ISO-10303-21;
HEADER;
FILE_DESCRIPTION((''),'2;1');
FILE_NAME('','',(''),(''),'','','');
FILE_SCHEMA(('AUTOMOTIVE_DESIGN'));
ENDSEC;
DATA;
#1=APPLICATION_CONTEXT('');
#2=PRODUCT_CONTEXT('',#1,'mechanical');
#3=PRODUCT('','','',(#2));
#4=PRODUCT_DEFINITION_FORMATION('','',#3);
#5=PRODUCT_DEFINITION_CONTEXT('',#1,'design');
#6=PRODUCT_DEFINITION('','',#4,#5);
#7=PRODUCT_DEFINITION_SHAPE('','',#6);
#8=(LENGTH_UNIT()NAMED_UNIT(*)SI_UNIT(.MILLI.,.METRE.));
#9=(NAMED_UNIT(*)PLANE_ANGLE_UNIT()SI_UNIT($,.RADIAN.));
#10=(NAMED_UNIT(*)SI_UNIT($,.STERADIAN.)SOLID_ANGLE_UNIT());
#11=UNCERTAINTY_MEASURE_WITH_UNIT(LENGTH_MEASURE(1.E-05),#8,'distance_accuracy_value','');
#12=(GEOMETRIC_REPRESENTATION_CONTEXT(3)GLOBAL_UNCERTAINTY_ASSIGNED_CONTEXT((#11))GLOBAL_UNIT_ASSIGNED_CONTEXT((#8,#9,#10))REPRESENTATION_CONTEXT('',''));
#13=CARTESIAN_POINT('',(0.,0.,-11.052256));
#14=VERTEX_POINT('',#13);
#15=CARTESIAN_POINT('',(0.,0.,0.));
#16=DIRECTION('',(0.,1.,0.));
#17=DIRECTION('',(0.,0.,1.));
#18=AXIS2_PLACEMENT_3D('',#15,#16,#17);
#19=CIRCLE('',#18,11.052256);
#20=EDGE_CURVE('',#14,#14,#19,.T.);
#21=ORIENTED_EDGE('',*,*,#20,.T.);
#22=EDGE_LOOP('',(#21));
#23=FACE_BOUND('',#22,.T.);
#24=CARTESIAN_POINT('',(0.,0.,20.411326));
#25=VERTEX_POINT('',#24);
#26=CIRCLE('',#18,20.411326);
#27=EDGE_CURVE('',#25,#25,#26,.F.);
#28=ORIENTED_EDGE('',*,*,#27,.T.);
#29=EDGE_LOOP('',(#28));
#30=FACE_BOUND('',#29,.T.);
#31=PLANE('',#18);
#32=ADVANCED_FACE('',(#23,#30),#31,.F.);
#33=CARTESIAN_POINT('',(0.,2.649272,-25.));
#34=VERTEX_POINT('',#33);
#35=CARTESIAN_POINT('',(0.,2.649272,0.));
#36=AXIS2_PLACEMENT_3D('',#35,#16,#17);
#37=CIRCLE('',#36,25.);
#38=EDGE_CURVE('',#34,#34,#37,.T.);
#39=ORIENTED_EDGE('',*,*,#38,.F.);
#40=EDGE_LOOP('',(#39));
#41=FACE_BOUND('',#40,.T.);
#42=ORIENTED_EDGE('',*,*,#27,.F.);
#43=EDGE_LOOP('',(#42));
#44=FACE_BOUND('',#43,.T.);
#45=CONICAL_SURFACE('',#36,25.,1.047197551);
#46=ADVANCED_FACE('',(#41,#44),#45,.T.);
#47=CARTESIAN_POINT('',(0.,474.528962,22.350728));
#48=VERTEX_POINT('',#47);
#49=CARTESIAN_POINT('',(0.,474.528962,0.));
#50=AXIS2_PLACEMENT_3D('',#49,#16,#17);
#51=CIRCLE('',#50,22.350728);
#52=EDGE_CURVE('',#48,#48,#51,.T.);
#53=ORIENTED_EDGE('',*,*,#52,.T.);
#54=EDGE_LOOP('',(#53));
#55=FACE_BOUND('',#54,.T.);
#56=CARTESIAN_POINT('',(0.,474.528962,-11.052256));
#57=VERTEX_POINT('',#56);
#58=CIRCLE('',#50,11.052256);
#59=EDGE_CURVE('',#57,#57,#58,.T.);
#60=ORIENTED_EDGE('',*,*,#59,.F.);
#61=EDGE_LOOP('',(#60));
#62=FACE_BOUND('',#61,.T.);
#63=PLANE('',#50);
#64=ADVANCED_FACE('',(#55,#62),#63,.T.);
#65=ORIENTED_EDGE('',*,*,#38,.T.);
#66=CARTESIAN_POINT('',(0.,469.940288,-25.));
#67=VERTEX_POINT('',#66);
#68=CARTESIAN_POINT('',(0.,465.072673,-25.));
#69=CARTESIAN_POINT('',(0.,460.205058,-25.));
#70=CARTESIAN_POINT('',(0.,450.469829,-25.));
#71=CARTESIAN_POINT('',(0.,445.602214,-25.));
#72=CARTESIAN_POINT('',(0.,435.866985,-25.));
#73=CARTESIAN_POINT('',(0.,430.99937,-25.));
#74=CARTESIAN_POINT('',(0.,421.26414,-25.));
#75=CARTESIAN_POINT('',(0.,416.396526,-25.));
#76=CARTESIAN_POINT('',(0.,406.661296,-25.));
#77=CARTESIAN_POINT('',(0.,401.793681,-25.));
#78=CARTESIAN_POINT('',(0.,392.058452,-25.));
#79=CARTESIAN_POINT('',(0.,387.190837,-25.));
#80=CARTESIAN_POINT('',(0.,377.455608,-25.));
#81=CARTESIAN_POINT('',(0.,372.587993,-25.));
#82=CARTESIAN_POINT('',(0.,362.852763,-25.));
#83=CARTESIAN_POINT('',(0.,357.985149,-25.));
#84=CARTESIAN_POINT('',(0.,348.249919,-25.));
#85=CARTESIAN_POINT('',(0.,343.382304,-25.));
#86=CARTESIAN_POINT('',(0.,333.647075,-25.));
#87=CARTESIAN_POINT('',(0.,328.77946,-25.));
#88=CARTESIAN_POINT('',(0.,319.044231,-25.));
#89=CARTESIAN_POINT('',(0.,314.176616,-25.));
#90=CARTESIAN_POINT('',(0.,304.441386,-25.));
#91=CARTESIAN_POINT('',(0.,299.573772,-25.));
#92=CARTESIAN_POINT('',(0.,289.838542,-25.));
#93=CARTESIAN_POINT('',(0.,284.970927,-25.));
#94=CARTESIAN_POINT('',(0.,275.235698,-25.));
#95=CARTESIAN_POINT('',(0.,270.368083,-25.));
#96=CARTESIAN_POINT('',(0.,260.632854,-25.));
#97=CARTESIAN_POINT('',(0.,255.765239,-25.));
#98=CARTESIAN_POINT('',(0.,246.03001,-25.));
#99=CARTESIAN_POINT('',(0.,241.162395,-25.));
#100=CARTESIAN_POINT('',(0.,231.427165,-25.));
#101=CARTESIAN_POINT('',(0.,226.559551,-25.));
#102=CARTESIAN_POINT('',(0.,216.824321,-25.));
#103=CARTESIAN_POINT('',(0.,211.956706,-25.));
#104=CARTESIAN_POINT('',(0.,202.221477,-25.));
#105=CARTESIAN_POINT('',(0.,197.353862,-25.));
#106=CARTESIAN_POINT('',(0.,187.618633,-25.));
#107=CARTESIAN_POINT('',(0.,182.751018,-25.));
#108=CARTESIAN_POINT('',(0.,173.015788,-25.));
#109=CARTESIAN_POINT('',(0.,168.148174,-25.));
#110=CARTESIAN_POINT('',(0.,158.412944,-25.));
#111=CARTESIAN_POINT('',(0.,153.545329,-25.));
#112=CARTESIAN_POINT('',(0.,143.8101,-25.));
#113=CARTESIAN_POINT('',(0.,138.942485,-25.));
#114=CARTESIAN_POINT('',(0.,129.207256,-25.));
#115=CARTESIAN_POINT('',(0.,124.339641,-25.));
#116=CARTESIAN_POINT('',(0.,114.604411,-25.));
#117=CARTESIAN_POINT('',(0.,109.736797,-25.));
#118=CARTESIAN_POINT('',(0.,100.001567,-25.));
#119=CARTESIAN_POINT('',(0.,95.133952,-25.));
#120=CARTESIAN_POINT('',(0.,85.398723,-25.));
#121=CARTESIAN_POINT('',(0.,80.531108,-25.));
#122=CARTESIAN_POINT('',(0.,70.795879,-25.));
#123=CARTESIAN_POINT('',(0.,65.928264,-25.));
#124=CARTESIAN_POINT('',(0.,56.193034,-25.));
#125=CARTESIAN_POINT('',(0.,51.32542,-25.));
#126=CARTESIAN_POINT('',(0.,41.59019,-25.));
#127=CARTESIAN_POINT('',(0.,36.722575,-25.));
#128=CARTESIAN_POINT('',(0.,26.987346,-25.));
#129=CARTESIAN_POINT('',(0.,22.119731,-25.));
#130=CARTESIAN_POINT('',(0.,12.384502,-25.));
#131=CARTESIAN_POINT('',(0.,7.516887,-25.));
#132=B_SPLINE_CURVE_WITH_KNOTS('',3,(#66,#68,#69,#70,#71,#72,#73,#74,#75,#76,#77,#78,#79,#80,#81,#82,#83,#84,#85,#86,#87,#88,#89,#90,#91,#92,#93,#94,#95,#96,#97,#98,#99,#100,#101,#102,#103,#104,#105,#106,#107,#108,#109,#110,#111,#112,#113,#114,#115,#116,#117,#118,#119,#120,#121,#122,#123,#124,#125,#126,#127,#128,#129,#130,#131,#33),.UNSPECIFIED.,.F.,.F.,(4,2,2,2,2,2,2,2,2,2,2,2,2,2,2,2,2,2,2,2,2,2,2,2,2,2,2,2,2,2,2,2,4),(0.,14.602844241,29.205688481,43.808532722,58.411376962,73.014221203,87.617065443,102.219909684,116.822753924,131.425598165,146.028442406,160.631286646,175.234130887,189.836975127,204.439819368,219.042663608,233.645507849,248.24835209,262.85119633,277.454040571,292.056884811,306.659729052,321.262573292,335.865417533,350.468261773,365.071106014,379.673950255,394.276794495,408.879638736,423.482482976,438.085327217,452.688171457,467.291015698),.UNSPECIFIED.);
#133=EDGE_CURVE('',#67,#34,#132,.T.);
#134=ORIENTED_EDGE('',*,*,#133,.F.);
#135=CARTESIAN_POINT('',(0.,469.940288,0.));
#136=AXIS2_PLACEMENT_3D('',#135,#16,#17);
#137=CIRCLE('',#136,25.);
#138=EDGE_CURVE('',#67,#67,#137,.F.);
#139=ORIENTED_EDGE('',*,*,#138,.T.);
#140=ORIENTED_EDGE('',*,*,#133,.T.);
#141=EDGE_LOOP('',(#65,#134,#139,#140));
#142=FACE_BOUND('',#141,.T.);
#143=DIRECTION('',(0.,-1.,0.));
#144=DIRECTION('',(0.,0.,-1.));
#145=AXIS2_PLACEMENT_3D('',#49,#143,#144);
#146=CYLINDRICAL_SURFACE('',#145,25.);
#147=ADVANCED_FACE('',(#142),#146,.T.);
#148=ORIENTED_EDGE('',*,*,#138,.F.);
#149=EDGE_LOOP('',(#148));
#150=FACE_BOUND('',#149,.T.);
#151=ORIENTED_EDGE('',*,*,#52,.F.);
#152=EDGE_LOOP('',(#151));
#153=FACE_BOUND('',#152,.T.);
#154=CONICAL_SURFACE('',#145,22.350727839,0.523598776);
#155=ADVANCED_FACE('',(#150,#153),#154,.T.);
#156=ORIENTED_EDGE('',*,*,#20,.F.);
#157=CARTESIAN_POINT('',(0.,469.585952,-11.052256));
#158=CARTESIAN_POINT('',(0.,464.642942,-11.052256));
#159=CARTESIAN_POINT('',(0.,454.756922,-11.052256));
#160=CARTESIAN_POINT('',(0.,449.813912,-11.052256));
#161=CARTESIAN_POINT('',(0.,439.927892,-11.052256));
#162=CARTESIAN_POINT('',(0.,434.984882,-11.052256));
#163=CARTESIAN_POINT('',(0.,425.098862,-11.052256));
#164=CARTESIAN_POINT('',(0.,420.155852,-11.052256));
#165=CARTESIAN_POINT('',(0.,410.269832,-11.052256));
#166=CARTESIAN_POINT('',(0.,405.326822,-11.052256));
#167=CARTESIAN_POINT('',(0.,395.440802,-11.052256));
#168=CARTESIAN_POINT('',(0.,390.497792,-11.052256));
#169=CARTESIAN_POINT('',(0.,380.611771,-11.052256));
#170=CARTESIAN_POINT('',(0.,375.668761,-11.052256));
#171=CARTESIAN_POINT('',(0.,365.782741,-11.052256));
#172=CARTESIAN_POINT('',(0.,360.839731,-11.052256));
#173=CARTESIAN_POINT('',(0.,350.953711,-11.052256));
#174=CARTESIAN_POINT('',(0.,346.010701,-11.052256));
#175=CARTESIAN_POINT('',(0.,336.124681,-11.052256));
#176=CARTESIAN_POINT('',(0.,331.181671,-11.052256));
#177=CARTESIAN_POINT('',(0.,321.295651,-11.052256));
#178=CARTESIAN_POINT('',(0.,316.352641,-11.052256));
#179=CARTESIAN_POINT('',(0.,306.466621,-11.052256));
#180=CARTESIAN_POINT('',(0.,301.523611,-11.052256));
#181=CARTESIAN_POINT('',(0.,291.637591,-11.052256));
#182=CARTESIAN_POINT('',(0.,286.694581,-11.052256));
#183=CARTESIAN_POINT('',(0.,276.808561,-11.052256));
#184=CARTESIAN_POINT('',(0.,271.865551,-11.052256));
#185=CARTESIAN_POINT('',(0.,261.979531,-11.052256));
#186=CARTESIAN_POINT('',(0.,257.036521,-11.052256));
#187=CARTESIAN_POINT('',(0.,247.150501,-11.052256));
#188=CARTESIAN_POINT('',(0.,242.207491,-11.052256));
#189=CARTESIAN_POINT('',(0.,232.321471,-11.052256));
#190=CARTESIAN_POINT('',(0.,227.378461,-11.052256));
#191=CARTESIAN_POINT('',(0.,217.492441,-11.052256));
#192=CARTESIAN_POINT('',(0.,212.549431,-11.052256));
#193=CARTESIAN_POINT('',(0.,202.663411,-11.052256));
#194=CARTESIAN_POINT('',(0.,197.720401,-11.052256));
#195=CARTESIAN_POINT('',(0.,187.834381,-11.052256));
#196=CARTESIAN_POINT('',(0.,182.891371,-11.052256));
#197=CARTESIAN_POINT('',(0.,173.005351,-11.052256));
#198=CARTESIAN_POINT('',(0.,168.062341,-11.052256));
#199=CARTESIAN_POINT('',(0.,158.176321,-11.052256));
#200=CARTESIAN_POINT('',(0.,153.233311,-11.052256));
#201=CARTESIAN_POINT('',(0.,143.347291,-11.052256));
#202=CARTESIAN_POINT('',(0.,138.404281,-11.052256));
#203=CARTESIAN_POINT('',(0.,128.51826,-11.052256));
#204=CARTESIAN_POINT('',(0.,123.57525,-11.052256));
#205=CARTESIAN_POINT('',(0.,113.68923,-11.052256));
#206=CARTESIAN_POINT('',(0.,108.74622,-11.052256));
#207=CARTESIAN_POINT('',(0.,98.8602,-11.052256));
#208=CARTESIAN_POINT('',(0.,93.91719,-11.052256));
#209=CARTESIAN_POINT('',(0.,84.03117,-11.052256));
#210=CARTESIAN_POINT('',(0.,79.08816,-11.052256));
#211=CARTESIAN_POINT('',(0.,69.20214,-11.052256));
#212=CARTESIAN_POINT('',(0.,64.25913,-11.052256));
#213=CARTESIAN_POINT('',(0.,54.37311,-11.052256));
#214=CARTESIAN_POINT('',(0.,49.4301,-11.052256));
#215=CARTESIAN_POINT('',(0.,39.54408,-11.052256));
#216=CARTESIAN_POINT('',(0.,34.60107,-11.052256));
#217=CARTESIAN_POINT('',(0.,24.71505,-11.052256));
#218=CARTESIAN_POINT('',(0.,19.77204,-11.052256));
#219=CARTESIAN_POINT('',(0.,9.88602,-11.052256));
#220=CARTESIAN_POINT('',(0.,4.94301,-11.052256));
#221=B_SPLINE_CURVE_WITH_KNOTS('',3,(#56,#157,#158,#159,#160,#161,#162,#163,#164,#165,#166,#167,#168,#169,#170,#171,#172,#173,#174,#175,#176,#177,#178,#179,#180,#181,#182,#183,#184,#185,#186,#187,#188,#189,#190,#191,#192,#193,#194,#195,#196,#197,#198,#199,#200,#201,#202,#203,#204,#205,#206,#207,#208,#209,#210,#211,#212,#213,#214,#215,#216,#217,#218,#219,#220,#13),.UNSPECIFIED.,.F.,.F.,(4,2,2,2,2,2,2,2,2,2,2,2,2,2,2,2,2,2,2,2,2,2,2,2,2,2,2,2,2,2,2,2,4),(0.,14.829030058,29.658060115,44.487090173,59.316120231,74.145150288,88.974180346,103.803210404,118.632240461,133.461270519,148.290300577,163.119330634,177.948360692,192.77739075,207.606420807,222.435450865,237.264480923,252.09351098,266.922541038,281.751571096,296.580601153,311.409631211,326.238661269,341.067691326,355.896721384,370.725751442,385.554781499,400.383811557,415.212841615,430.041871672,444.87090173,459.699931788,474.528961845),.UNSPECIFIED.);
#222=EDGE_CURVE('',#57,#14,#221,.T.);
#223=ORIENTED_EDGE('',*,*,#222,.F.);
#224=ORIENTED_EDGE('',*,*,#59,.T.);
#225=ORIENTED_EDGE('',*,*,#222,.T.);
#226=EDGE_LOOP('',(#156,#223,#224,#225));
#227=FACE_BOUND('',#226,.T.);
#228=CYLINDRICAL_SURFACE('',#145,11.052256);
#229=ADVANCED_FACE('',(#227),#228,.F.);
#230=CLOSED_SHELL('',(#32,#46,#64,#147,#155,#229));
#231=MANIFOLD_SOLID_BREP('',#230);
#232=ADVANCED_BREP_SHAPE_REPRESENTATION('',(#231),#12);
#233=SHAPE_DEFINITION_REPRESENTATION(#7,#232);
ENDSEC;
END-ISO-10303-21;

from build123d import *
from OCP.BRepFilletAPI import BRepFilletAPI_MakeChamfer

# Parameters (mm, degrees)
SKETCH1_R           = 25
BOSS_EXTRUDE1_DEPTH = 474.528961845
SKETCH2_R           = 11.052256492
CUT_EXTRUDE1_DEPTH  = 476.844234629
CHAMFER1_SIZE       = 4.588673986
CHAMFER1_SIZE2      = 2.649272161


with BuildPart() as part:
    # Sketch1 → Boss-Extrude1 (new body)
    with BuildSketch(Plane(origin=(0, 0, 0), x_dir=(1, 0, 0), z_dir=(0, 1, 0))):
        Circle(SKETCH1_R)
    extrude(amount=BOSS_EXTRUDE1_DEPTH)

    # Sketch2 → Cut-Extrude1 (cut, through all)
    with BuildSketch(Plane(origin=(0, 0, 0), x_dir=(1, 0, 0), z_dir=(0, 1, 0))):
        Circle(SKETCH2_R)
    extrude(amount=CUT_EXTRUDE1_DEPTH, mode=Mode.SUBTRACT)

    # Chamfer1: one chamfer whose edges measure the first distance from different faces: ONE call of the kernel's chamfer builder (chamfer() names one face for all edges)
    chamfer1_edges_1 = [part.edges().sort_by_distance(p)[0] for p in [
        (-25, 474.528961845, 0),
    ]]
    chamfer1_side_1 = [part.faces().sort_by_distance(p)[0] for p in [
        (-25, 237.264480923, 0),
    ]]
    chamfer1_edges_2 = [part.edges().sort_by_distance(p)[0] for p in [
        (-25, 0, 0),
    ]]
    chamfer1_side_2 = [part.faces().sort_by_distance(p)[0] for p in [
        (-24.292893219, 0, 0),
    ]]
    chamfer1 = BRepFilletAPI_MakeChamfer(part.part.solid().wrapped)
    for e in chamfer1_edges_1:
        chamfer1.Add(CHAMFER1_SIZE, CHAMFER1_SIZE2, e.wrapped, chamfer1_side_1[0].wrapped)  # the first distance lies on this face
    for e in chamfer1_edges_2:
        chamfer1.Add(CHAMFER1_SIZE, CHAMFER1_SIZE2, e.wrapped, chamfer1_side_2[0].wrapped)  # the first distance lies on this face
    add(Compound.cast(chamfer1.Shape()), mode=Mode.REPLACE)


solid = part.part
